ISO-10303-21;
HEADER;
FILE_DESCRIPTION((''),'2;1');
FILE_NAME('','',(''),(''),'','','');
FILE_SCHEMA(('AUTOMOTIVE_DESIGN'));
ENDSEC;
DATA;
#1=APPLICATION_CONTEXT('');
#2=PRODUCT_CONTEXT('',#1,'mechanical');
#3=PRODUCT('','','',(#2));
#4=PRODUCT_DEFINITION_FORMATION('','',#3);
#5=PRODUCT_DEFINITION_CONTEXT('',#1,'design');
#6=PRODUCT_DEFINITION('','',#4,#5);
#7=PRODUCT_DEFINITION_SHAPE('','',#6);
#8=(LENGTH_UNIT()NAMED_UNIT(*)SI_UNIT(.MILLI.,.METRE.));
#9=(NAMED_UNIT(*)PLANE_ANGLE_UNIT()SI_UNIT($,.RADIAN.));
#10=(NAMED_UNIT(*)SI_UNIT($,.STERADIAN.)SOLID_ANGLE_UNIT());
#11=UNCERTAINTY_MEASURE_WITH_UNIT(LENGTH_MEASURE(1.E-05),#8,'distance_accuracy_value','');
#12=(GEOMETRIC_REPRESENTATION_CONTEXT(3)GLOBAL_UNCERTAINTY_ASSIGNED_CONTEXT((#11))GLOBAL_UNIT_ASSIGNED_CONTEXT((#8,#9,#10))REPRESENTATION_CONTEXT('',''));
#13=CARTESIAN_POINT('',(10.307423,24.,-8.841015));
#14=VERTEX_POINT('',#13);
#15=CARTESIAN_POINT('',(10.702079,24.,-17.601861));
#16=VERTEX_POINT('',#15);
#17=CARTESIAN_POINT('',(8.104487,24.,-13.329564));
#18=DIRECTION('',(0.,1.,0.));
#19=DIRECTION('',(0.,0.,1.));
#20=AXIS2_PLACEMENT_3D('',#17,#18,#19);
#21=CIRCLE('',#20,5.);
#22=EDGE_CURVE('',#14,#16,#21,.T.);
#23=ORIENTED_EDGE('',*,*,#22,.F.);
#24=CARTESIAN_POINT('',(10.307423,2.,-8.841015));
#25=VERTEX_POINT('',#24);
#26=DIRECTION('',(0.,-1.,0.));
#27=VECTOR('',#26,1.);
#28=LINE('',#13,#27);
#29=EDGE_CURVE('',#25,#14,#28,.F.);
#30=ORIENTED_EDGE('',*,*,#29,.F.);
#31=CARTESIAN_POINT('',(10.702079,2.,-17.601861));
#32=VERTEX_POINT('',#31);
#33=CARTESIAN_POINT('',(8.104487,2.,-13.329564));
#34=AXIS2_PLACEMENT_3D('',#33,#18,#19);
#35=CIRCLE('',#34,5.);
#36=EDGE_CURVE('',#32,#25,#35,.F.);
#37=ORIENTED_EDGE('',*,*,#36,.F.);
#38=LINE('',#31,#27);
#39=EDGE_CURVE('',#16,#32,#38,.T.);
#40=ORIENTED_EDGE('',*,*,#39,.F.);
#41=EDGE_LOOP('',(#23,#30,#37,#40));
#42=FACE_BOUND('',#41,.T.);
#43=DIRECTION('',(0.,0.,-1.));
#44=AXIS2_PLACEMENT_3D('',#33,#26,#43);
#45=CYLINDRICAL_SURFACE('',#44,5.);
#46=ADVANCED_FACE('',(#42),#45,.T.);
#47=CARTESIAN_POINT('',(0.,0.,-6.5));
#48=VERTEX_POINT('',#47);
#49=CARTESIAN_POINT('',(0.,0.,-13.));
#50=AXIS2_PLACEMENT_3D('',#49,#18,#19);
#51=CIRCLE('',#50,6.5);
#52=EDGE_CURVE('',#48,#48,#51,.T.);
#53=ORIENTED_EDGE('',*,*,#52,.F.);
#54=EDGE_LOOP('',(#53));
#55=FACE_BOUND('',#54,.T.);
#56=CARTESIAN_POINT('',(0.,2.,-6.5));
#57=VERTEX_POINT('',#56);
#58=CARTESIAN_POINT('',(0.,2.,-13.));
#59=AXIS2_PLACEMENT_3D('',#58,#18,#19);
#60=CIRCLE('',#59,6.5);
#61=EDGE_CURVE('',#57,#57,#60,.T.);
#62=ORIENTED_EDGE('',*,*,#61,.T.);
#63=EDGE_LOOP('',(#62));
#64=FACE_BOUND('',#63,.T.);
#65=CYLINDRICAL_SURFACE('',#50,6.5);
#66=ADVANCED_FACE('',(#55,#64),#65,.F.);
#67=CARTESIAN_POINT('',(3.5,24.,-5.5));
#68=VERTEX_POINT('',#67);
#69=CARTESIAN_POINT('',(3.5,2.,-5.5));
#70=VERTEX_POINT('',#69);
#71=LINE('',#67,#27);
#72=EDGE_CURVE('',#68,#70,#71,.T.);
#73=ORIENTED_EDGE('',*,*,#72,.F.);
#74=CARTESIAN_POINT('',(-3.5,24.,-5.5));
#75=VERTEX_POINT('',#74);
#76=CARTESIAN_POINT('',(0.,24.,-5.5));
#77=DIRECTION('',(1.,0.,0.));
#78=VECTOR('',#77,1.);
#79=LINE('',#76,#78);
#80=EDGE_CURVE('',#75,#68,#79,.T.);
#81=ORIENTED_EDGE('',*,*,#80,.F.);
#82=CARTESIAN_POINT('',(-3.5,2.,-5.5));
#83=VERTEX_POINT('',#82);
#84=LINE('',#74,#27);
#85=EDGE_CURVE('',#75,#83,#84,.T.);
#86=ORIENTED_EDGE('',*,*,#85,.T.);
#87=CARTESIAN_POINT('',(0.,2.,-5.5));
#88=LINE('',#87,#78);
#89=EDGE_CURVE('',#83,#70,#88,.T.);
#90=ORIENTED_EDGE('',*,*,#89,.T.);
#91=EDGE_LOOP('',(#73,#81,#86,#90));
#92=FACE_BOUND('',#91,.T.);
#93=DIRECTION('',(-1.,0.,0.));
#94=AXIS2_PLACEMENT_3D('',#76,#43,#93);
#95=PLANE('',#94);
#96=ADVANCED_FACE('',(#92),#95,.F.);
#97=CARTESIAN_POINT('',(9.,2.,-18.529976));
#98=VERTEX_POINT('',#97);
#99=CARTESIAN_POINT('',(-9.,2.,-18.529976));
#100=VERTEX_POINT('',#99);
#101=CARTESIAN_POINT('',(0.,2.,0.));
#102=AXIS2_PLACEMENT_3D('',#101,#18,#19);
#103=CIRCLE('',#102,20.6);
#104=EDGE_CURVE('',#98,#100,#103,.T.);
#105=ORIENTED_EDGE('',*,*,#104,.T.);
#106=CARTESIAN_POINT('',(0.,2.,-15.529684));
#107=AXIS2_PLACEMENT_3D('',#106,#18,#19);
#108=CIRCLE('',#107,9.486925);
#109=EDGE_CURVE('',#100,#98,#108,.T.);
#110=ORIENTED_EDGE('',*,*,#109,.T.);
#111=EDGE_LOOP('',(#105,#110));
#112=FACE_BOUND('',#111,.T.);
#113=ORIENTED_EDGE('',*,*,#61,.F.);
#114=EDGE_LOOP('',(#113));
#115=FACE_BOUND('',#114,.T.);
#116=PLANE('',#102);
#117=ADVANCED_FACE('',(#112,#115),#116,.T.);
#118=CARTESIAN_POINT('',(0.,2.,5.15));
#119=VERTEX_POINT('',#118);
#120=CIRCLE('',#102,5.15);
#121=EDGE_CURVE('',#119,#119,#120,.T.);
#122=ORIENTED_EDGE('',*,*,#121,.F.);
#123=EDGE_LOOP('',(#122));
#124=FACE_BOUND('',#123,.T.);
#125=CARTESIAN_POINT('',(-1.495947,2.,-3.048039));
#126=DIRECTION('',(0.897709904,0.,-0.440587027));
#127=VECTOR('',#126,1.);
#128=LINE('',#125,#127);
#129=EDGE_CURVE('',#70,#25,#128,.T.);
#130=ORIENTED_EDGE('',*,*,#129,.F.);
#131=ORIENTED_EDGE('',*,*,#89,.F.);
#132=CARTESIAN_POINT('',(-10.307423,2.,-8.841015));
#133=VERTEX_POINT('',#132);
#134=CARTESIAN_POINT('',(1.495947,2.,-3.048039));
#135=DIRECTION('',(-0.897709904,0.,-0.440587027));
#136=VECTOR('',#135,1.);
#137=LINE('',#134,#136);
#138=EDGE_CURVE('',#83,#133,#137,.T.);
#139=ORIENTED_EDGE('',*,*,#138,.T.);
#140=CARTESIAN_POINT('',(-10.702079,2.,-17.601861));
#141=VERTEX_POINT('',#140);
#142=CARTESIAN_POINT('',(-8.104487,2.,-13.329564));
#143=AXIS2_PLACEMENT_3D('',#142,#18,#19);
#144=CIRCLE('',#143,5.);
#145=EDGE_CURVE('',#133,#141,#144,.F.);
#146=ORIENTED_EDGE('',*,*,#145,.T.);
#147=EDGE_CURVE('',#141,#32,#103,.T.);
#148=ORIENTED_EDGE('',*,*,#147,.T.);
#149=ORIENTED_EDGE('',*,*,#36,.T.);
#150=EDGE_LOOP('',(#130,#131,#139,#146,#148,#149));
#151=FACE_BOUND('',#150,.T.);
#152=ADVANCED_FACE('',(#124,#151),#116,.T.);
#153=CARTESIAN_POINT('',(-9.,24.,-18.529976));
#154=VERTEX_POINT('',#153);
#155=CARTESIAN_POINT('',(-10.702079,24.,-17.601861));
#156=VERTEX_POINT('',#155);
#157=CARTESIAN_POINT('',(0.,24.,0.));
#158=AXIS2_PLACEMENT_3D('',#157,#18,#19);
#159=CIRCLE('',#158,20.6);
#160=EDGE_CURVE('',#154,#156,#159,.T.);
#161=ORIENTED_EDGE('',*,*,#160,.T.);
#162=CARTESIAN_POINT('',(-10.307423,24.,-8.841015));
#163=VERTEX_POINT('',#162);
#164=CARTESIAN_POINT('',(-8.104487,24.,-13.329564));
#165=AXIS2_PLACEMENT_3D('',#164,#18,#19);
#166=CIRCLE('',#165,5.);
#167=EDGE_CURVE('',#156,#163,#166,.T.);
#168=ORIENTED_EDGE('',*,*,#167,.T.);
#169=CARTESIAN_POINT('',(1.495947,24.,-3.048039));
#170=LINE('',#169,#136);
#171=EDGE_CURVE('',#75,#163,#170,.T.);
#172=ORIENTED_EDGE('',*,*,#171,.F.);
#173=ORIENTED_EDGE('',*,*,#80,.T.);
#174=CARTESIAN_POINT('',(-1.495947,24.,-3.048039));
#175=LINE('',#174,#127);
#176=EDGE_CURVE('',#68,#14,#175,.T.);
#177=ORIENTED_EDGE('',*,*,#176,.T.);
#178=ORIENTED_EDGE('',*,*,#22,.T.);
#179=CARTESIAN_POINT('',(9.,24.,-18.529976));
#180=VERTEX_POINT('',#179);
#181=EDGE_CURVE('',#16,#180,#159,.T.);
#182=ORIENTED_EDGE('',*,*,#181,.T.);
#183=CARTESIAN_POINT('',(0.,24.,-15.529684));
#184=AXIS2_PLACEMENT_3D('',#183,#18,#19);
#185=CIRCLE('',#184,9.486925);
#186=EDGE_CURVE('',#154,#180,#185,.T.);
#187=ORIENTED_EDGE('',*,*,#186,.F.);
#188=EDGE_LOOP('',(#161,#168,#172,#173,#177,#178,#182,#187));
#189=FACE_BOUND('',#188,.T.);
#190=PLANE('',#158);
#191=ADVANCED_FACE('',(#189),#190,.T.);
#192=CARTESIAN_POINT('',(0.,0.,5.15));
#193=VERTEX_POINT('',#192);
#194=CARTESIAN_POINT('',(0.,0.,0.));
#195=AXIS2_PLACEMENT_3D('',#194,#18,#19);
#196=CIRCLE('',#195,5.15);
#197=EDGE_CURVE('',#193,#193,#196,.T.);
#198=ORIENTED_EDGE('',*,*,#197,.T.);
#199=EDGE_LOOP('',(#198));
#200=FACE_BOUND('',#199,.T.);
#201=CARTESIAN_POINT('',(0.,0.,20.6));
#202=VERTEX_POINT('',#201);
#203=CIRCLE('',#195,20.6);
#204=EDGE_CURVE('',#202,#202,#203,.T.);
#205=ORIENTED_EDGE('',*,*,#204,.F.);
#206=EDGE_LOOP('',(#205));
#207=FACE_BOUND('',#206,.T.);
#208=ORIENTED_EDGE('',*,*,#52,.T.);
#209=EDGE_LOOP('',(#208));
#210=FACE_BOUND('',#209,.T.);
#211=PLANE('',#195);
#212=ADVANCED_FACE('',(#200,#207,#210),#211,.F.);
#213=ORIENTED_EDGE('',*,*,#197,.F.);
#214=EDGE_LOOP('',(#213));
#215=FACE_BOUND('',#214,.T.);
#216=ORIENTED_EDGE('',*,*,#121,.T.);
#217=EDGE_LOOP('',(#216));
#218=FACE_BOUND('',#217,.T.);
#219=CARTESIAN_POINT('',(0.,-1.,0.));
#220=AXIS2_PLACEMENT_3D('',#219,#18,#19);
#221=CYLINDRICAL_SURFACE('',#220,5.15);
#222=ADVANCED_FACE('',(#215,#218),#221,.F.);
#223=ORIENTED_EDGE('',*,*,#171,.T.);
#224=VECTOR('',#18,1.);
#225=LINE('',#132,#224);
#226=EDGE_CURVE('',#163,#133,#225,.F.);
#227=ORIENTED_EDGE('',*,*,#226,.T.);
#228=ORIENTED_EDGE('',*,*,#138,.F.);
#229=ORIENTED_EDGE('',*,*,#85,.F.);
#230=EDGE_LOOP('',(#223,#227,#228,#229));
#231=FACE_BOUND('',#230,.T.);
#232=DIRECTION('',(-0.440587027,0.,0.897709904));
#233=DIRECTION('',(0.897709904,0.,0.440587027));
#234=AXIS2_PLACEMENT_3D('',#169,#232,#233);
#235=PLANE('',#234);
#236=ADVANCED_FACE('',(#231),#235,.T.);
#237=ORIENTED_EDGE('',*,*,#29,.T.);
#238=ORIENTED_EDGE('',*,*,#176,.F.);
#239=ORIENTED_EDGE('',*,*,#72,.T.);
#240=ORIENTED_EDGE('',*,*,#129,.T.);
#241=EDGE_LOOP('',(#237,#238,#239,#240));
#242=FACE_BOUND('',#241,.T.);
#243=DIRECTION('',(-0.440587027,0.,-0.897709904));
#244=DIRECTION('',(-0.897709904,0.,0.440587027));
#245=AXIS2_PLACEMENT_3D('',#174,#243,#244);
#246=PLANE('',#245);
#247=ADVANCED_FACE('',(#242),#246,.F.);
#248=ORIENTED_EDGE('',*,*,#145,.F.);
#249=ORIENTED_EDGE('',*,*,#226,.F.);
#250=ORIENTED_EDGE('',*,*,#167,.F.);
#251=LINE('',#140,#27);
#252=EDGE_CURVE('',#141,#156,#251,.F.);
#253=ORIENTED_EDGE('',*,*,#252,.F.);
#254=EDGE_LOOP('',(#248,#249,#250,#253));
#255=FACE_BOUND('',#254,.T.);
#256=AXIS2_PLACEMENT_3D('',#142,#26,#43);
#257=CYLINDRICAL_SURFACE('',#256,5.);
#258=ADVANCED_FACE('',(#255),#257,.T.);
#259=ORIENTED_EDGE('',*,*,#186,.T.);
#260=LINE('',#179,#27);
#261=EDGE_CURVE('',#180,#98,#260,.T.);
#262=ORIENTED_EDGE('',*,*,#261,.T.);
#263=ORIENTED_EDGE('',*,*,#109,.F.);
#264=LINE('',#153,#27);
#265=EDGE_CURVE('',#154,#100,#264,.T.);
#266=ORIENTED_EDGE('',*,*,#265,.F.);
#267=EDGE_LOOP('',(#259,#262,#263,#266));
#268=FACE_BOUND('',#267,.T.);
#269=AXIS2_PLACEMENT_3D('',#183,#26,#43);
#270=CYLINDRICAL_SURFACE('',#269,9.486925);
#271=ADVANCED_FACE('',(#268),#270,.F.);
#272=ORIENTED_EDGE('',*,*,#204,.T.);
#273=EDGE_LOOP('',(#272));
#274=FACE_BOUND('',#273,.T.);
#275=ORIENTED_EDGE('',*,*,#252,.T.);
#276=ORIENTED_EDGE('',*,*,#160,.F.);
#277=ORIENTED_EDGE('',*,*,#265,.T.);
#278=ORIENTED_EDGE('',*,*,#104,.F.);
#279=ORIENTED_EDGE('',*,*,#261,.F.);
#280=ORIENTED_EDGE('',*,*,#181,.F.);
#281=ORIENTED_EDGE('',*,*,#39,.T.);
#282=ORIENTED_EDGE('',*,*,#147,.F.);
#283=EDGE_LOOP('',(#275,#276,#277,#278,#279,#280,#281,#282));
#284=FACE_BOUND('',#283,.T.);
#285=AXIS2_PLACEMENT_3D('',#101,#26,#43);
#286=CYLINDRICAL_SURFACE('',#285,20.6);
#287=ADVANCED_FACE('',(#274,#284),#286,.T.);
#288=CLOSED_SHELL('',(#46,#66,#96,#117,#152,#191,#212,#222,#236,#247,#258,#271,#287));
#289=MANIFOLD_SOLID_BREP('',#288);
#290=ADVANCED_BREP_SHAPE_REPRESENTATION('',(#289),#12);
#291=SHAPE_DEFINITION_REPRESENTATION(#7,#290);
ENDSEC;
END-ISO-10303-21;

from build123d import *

# Parameters (mm, degrees)
SKETCH1_R           = 20.600000000000005
BOSS_EXTRUDE1_DEPTH = 2
SKETCH2_R           = 5.150000000000001
CUT_EXTRUDE1_DEPTH  = 3
SKETCH3_R           = 6.500000000000001
CUT_EXTRUDE2_DEPTH  = 2
BOSS_EXTRUDE4_DEPTH = 22
FILLET2_R           = 5


with BuildPart() as part:
    # Sketch1 → Boss-Extrude1 (new body)
    with BuildSketch(Plane(origin=(0, 0, 0), x_dir=(1, 0, 0), z_dir=(0, 1, 0))):
        Circle(SKETCH1_R)
    extrude(amount=BOSS_EXTRUDE1_DEPTH)

    # Sketch2 → Cut-Extrude1 (cut)
    with BuildSketch(Plane(origin=(0, 2, 0), x_dir=(1, 0, 0), z_dir=(0, 1, 0))):
        Circle(SKETCH2_R)
    extrude(amount=-CUT_EXTRUDE1_DEPTH, mode=Mode.SUBTRACT)

    # Sketch3 → Cut-Extrude2 (cut)
    with BuildSketch(Plane(origin=(0, 2, 0), x_dir=(1, 0, 0), z_dir=(0, 1, 0))):
        with Locations((0, 13)):
            Circle(SKETCH3_R)
    extrude(amount=-CUT_EXTRUDE2_DEPTH, mode=Mode.SUBTRACT)

    # Sketch4 → Boss-Extrude4 (add)
    with BuildSketch(Plane(origin=(0, 2, 0), x_dir=(1, 0, 0), z_dir=(0, 1, 0))):
        with BuildLine():
            Line((-16.74395413276088, 12), (-3.5000000000000004, 5.5))
            Line((-3.5000000000000004, 5.5), (3.4999999999999996, 5.5))
            Line((3.4999999999999996, 5.5), (16.74395413276088, 12))
            ThreePointArc((16.743954132760877, 12.000000000000005), (13.279606142773188, 15.748398670748102), (9, 18.529975715040756))
            ThreePointArc((9, 18.529975715040756), (-4.4e-16, 6.042759078514694), (-9, 18.529975715040756))
            ThreePointArc((-9.000000000000004, 18.529975715040756), (-13.279606142773194, 15.748398670748106), (-16.74395413276088, 12))
        make_face()
    extrude(amount=BOSS_EXTRUDE4_DEPTH)

    # Fillet2
    fillet2_edges = [part.edges().sort_by_distance(p)[0] for p in [
        (16.74395413276088, 13, -12.000000000000004),
        (-16.743954132760884, 13, -12),
    ]]
    fillet(fillet2_edges, radius=FILLET2_R)


solid = part.part
